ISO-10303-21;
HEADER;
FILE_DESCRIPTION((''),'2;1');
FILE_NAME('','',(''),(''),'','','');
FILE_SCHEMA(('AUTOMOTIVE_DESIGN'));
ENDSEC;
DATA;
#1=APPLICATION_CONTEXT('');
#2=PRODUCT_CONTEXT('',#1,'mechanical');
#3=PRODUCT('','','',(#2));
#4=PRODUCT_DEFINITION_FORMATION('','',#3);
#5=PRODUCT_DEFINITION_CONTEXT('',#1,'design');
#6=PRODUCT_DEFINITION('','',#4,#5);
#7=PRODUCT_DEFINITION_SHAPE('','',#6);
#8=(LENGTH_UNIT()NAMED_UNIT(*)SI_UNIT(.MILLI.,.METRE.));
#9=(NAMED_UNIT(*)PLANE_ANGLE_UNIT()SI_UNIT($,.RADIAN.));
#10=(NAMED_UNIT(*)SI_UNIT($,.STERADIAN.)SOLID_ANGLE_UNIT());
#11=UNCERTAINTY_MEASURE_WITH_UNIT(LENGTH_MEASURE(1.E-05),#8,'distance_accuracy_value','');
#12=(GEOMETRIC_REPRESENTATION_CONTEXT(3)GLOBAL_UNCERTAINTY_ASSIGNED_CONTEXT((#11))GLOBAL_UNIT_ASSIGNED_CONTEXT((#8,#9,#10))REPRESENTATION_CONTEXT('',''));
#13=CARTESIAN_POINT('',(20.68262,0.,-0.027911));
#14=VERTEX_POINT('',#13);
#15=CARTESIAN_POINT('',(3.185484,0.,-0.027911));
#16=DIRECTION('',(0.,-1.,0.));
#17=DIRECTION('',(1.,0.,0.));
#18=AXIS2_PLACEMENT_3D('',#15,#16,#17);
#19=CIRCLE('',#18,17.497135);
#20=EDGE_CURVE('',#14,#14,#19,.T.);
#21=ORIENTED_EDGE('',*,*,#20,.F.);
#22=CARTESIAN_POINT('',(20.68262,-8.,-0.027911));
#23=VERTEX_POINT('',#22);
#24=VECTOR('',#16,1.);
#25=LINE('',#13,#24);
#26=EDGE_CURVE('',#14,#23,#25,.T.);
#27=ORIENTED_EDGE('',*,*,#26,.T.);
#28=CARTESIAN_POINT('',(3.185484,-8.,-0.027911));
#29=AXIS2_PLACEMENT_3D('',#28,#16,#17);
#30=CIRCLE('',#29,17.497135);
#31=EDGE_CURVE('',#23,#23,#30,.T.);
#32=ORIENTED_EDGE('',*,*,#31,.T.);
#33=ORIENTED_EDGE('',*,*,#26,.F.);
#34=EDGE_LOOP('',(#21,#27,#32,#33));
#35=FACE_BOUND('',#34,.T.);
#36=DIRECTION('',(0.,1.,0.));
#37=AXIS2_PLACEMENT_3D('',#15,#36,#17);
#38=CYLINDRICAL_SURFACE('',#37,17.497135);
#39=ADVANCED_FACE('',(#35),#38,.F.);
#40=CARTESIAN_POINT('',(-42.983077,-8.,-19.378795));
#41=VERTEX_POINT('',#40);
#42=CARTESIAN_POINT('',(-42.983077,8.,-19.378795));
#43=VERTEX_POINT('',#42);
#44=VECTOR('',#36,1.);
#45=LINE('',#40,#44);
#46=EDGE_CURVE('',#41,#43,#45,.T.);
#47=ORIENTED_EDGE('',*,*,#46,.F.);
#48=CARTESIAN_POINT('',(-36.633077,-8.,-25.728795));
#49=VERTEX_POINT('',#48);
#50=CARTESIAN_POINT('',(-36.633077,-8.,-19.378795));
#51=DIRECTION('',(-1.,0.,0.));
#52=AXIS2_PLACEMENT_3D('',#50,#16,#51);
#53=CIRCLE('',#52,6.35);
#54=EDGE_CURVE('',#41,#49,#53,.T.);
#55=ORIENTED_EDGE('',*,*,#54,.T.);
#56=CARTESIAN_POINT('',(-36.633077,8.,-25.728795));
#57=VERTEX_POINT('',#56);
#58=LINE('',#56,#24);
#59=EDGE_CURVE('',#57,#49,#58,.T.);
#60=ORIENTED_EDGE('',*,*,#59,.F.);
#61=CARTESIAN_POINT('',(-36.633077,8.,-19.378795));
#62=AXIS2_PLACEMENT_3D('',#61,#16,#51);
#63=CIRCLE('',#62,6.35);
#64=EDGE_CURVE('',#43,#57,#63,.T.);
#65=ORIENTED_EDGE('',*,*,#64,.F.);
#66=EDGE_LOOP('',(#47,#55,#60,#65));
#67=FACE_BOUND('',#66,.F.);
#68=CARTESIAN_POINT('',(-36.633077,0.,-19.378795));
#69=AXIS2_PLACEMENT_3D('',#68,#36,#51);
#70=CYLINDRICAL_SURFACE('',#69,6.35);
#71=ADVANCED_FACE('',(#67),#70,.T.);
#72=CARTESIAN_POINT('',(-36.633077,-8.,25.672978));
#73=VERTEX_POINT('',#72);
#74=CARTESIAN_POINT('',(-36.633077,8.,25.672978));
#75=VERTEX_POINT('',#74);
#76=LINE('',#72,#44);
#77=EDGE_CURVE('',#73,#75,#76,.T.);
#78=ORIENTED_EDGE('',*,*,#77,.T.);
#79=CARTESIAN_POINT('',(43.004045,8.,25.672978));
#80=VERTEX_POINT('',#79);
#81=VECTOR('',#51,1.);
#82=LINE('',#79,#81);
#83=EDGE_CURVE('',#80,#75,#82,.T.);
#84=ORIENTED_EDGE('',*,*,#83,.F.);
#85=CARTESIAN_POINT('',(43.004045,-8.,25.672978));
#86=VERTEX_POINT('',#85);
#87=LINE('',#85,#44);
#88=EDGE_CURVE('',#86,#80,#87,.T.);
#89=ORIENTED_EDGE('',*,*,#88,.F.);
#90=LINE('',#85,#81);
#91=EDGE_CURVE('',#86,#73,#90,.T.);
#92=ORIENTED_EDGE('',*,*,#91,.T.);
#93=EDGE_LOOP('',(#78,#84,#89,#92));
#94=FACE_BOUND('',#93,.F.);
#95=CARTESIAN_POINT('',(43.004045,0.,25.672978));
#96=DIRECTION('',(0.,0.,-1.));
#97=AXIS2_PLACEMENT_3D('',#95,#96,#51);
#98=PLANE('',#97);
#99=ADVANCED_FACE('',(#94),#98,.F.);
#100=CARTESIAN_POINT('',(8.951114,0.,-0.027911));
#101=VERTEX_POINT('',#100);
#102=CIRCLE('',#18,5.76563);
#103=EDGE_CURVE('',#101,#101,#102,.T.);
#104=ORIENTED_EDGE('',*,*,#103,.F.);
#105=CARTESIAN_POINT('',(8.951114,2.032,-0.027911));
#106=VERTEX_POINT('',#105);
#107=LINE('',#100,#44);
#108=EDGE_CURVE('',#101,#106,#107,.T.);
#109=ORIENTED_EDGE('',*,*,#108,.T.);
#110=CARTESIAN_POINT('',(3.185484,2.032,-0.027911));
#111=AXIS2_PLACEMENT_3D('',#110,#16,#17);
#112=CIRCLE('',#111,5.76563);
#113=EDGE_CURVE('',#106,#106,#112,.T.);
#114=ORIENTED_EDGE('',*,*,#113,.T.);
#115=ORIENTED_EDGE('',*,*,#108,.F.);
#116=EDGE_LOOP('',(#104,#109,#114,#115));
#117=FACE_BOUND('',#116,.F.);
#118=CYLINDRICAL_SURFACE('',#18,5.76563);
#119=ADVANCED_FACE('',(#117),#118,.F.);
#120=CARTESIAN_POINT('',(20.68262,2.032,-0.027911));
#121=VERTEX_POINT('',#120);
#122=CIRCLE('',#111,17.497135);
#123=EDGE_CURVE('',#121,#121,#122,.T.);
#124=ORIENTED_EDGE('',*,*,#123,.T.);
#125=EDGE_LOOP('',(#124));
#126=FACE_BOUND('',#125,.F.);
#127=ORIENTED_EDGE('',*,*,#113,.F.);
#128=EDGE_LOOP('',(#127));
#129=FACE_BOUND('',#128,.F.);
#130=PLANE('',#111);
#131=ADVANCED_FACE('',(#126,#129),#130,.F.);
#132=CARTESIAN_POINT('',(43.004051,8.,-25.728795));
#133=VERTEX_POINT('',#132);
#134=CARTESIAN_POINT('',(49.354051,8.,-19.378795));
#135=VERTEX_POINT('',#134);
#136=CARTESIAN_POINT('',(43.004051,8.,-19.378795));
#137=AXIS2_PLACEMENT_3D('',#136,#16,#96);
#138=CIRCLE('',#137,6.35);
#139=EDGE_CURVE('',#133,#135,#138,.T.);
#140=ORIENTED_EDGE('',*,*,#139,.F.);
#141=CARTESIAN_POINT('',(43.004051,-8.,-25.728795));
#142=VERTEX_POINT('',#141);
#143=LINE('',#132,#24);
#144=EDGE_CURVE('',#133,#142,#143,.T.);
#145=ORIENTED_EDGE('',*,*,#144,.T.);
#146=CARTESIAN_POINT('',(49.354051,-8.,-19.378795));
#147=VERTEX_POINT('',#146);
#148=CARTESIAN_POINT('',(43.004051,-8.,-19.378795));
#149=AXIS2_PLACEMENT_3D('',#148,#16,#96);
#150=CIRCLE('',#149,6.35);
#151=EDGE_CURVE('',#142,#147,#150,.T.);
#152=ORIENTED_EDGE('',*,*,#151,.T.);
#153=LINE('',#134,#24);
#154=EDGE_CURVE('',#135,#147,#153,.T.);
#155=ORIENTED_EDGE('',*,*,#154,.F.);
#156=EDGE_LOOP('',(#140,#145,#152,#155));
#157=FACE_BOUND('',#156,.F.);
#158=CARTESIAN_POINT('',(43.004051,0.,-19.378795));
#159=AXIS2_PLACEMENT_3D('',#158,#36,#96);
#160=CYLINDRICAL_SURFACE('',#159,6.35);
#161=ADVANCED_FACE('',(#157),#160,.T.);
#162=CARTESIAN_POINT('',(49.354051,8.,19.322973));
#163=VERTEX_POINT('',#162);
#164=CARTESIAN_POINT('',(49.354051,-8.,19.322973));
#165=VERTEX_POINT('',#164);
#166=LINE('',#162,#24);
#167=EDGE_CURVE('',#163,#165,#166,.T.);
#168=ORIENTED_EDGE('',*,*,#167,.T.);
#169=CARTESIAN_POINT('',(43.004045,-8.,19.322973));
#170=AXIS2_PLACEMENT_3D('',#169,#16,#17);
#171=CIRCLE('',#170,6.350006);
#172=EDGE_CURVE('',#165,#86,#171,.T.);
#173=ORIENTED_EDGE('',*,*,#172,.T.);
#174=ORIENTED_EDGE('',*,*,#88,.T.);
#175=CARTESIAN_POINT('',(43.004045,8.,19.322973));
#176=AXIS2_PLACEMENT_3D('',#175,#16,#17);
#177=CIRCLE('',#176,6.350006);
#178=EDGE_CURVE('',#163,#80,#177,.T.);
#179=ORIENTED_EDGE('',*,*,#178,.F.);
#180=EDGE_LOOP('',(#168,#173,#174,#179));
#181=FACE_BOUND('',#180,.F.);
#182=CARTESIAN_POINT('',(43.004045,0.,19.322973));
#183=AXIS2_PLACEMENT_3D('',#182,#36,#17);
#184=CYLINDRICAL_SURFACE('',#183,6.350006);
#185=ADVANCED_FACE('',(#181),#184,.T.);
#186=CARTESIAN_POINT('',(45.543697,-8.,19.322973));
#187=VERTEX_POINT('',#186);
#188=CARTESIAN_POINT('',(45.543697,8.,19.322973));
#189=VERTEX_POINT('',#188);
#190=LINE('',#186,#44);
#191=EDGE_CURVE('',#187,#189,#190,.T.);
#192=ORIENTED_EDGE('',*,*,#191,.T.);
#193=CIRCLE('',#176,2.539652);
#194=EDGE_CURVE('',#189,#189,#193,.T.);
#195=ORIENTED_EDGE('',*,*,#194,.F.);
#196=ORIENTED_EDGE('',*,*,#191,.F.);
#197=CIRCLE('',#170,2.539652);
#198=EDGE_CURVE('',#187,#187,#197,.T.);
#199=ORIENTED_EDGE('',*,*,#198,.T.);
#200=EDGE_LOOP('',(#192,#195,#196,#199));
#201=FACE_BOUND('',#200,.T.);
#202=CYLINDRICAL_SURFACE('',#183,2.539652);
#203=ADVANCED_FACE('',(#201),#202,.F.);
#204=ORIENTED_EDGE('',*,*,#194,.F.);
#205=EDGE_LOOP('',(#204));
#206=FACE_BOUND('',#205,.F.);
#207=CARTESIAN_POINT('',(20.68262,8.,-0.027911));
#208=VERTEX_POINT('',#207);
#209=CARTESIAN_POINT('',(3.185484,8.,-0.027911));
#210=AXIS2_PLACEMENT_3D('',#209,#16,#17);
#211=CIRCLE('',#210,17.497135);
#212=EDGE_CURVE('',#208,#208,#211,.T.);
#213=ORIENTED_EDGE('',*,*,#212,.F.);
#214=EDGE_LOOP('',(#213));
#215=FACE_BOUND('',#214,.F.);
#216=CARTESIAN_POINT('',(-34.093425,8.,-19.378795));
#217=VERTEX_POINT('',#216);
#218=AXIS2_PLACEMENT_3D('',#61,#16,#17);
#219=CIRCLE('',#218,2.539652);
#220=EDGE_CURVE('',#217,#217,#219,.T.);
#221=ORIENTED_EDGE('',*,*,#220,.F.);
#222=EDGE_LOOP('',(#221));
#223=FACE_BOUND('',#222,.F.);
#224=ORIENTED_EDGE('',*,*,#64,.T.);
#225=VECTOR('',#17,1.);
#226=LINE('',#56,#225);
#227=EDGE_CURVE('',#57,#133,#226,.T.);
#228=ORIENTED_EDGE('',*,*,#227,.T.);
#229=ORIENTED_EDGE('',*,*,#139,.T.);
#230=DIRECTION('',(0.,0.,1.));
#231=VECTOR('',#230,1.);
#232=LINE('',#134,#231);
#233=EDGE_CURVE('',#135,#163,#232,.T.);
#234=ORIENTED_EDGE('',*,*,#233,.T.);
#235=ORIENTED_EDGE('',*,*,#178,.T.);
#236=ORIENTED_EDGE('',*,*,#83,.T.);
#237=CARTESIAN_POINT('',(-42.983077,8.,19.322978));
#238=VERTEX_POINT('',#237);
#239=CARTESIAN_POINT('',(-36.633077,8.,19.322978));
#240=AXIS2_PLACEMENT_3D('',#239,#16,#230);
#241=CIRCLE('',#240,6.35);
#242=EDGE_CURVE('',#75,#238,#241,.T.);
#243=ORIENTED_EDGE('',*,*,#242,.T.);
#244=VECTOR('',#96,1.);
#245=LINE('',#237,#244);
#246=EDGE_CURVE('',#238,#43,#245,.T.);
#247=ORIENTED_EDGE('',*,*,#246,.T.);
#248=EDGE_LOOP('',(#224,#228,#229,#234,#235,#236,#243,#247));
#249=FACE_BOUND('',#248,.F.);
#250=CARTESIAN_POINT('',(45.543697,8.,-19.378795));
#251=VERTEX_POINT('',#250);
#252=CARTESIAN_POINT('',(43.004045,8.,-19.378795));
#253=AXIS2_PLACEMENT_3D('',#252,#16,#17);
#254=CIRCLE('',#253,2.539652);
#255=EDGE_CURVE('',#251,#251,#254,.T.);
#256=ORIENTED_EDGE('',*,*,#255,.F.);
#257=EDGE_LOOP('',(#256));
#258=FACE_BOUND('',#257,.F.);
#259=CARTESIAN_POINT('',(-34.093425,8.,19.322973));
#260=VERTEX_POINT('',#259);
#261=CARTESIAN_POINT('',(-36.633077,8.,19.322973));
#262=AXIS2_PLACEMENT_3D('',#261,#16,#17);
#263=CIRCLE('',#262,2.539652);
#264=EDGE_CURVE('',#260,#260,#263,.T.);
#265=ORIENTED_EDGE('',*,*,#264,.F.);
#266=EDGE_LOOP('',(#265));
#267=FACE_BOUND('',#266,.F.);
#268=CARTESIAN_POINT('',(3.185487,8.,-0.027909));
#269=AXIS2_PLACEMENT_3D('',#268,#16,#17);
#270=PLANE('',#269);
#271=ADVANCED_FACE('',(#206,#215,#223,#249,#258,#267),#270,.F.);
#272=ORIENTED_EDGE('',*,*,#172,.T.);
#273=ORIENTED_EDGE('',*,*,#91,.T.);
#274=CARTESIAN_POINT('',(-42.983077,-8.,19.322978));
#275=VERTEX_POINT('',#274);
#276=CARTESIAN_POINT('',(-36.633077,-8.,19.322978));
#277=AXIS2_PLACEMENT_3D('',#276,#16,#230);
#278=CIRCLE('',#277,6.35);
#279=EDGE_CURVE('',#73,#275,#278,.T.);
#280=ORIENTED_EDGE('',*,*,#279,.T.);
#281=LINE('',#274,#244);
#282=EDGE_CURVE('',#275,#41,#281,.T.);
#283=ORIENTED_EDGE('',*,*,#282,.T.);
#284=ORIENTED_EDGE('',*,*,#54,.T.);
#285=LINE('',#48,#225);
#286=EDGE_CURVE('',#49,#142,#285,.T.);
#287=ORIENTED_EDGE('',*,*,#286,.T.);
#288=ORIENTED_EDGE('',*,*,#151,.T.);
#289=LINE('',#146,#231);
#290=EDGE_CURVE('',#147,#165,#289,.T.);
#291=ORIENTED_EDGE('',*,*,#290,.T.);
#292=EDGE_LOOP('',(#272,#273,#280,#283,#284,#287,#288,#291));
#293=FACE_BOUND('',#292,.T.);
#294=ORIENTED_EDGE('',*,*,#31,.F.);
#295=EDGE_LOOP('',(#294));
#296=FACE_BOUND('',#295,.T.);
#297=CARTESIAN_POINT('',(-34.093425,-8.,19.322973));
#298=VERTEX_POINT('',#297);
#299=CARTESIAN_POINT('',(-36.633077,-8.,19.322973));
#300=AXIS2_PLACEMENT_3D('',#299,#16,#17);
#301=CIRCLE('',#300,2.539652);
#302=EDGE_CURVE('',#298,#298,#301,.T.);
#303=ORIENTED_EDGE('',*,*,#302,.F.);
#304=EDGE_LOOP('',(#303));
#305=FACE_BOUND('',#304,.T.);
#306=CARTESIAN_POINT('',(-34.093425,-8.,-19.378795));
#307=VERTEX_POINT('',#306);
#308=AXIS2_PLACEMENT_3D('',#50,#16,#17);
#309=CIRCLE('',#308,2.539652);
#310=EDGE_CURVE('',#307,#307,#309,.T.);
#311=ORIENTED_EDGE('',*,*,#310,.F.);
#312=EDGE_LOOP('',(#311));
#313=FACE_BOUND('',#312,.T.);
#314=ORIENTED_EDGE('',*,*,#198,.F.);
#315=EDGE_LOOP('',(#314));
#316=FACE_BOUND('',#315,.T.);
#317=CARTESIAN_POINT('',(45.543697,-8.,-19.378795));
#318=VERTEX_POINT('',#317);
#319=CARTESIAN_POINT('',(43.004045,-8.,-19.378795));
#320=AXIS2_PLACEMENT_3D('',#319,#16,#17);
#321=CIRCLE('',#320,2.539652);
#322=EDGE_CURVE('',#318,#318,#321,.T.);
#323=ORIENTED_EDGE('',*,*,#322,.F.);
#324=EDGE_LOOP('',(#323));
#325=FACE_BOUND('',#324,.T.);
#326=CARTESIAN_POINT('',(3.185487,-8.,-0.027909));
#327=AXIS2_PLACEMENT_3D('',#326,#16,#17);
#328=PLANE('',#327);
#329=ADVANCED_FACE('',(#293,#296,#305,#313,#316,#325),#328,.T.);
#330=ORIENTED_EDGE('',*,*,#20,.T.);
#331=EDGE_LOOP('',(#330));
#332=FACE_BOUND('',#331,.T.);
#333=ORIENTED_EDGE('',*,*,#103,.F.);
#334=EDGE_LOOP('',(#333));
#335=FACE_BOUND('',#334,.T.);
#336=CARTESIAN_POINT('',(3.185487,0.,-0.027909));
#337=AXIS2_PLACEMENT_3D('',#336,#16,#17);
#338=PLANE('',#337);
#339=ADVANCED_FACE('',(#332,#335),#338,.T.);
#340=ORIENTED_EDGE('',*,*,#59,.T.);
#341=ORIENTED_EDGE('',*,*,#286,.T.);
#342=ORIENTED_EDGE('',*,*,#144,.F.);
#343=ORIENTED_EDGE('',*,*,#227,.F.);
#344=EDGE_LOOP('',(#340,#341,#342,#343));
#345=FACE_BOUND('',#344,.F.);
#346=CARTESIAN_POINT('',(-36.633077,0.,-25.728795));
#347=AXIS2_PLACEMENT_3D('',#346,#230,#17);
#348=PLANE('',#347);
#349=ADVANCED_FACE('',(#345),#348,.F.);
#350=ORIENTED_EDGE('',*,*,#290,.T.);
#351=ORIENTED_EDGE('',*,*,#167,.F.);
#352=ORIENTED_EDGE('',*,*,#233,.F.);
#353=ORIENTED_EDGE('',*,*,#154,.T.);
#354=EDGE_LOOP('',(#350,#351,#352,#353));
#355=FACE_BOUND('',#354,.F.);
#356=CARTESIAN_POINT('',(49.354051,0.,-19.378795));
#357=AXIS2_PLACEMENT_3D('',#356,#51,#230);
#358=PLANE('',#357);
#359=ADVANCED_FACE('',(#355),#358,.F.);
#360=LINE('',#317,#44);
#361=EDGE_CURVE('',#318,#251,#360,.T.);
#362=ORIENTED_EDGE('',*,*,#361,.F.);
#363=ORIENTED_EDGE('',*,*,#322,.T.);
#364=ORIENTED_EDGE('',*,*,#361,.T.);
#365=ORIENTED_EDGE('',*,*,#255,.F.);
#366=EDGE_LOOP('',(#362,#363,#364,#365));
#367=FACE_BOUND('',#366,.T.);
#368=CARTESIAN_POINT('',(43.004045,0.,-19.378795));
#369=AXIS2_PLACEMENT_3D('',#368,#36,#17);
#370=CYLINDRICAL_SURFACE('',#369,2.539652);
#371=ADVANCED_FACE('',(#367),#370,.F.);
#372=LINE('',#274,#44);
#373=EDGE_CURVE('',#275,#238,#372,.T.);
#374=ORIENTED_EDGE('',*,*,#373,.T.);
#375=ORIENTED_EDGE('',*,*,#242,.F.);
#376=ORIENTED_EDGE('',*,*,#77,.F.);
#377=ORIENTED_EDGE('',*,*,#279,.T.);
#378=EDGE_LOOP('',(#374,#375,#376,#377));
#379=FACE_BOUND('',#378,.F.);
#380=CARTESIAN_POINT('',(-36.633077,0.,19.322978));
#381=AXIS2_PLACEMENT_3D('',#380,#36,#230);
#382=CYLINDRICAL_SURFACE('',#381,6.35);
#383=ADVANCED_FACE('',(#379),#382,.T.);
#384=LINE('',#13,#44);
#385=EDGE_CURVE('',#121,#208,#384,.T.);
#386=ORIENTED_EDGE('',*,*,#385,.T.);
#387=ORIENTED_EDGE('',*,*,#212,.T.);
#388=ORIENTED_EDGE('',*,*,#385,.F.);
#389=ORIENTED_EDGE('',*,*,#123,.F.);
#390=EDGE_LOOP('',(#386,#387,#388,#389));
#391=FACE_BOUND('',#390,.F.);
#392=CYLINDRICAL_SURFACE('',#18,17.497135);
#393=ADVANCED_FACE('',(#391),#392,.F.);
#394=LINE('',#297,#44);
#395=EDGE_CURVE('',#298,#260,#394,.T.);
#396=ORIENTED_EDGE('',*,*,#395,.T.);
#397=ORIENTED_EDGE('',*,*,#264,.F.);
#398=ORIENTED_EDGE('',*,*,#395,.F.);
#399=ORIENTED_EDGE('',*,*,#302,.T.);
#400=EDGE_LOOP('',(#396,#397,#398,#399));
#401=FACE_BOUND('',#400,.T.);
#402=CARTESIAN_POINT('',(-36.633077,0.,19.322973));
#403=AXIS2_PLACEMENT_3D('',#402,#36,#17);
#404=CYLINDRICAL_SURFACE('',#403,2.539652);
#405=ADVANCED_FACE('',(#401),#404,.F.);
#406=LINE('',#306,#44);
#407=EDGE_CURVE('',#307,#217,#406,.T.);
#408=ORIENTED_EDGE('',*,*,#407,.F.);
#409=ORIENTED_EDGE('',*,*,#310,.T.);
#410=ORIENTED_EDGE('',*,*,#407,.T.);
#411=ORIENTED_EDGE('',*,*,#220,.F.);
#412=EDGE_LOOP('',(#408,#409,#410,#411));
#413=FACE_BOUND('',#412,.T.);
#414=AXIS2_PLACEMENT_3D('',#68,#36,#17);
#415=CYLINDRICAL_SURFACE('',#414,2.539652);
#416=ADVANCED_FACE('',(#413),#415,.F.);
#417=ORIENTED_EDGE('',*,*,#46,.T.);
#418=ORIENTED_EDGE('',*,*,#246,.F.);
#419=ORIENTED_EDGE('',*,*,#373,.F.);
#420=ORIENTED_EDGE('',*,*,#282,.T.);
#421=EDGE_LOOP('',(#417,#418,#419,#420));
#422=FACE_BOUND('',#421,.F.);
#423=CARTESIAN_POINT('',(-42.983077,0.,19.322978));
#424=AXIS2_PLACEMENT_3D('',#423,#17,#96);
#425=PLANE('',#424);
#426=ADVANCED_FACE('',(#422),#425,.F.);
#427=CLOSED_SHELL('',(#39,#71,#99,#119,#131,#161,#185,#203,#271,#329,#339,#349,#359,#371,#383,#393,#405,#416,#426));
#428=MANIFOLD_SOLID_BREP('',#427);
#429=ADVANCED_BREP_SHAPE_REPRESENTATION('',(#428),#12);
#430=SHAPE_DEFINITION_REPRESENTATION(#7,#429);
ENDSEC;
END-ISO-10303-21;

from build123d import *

# Parameters (mm, degrees)
F0_R     = 17.4971354571
F0_R_2   = 11.8450866669
F0_R_3   = 5.7656301988
F1_DEPTH = 2.032
F0_R_4   = 2.5396522034
F2_DEPTH = 8
F3_DEPTH = 8


# Not quite as in the source:
# - a feature names something its author has since deleted; it is built from what else it names


with BuildPart() as f1:
    # F0 (on Front) → F1 (new body)
    with BuildSketch(Plane.XZ):
        with Locations((3.1854841864, -0.0279111721)):
            Circle(F0_R)
        with Locations((3.1854841864, -0.0279111721)):
            Circle(F0_R_2, mode=Mode.SUBTRACT)
        with Locations((3.1854841864, -0.0279111721)):
            Circle(F0_R_2)
        with Locations((3.1854841864, -0.0279111721)):
            Circle(F0_R_3, mode=Mode.SUBTRACT)
    extrude(amount=-F1_DEPTH)

    # F0 (on Front) → F2 (join)
    with BuildSketch(Plane.XZ):
        with BuildLine():
            ThreePointArc((-42.9830769071, -19.3787951119), (-41.1232049677, -23.8689231724), (-36.6330769071, -25.7287951119))
            Line((-36.6330769071, -25.7287951119), (43.0040508678, -25.7287951119))
            ThreePointArc((43.0040508678, -25.7287951119), (47.4941789284, -23.8689231724), (49.3540508678, -19.3787951119))
            Line((49.3540508678, -19.3787951119), (49.3540508678, 19.3229727678))
            ThreePointArc((49.3540508678, 19.3229727678), (47.4941772917, 23.8131047796), (43.0040452799, 25.6729783557))
            Line((43.0040452799, 25.6729783557), (-36.6330769071, 25.6729783557))
            ThreePointArc((-36.6330769071, 25.6729783557), (-41.1232049677, 23.8131064163), (-42.9830769071, 19.3229783557))
            Line((-42.9830769071, 19.3229783557), (-42.9830769071, -19.3787951119))
        make_face()
        with Locations((-36.6330769071, -19.3787951119)):
            Circle(F0_R_4, mode=Mode.SUBTRACT)
        with Locations((3.1854841864, -0.0279111721)):
            Circle(F0_R, mode=Mode.SUBTRACT)
        with Locations((43.0040452799, -19.3787951119)):
            Circle(F0_R_4, mode=Mode.SUBTRACT)
        with Locations((-36.6330769071, 19.3229727678)):
            Circle(F0_R_4, mode=Mode.SUBTRACT)
        with Locations((43.0040452799, 19.3229727678)):
            Circle(F0_R_4, mode=Mode.SUBTRACT)
    extrude(amount=-F2_DEPTH)

    # F0 (on Front) → F3 (join)
    with BuildSketch(Plane.XZ):
        with BuildLine():
            ThreePointArc((-42.9830769071, -19.3787951119), (-41.1232049677, -23.8689231724), (-36.6330769071, -25.7287951119))
            Line((-36.6330769071, -25.7287951119), (43.0040508678, -25.7287951119))
            ThreePointArc((43.0040508678, -25.7287951119), (47.4941789284, -23.8689231724), (49.3540508678, -19.3787951119))
            Line((49.3540508678, -19.3787951119), (49.3540508678, 19.3229727678))
            ThreePointArc((49.3540508678, 19.3229727678), (47.4941772917, 23.8131047796), (43.0040452799, 25.6729783557))
            Line((43.0040452799, 25.6729783557), (-36.6330769071, 25.6729783557))
            ThreePointArc((-36.6330769071, 25.6729783557), (-41.1232049677, 23.8131064163), (-42.9830769071, 19.3229783557))
            Line((-42.9830769071, 19.3229783557), (-42.9830769071, -19.3787951119))
        make_face()
        with Locations((-36.6330769071, -19.3787951119)):
            Circle(F0_R_4, mode=Mode.SUBTRACT)
        with Locations((3.1854841864, -0.0279111721)):
            Circle(F0_R, mode=Mode.SUBTRACT)
        with Locations((43.0040452799, -19.3787951119)):
            Circle(F0_R_4, mode=Mode.SUBTRACT)
        with Locations((-36.6330769071, 19.3229727678)):
            Circle(F0_R_4, mode=Mode.SUBTRACT)
        with Locations((43.0040452799, 19.3229727678)):
            Circle(F0_R_4, mode=Mode.SUBTRACT)
    extrude(amount=F3_DEPTH)


solid = f1.part
